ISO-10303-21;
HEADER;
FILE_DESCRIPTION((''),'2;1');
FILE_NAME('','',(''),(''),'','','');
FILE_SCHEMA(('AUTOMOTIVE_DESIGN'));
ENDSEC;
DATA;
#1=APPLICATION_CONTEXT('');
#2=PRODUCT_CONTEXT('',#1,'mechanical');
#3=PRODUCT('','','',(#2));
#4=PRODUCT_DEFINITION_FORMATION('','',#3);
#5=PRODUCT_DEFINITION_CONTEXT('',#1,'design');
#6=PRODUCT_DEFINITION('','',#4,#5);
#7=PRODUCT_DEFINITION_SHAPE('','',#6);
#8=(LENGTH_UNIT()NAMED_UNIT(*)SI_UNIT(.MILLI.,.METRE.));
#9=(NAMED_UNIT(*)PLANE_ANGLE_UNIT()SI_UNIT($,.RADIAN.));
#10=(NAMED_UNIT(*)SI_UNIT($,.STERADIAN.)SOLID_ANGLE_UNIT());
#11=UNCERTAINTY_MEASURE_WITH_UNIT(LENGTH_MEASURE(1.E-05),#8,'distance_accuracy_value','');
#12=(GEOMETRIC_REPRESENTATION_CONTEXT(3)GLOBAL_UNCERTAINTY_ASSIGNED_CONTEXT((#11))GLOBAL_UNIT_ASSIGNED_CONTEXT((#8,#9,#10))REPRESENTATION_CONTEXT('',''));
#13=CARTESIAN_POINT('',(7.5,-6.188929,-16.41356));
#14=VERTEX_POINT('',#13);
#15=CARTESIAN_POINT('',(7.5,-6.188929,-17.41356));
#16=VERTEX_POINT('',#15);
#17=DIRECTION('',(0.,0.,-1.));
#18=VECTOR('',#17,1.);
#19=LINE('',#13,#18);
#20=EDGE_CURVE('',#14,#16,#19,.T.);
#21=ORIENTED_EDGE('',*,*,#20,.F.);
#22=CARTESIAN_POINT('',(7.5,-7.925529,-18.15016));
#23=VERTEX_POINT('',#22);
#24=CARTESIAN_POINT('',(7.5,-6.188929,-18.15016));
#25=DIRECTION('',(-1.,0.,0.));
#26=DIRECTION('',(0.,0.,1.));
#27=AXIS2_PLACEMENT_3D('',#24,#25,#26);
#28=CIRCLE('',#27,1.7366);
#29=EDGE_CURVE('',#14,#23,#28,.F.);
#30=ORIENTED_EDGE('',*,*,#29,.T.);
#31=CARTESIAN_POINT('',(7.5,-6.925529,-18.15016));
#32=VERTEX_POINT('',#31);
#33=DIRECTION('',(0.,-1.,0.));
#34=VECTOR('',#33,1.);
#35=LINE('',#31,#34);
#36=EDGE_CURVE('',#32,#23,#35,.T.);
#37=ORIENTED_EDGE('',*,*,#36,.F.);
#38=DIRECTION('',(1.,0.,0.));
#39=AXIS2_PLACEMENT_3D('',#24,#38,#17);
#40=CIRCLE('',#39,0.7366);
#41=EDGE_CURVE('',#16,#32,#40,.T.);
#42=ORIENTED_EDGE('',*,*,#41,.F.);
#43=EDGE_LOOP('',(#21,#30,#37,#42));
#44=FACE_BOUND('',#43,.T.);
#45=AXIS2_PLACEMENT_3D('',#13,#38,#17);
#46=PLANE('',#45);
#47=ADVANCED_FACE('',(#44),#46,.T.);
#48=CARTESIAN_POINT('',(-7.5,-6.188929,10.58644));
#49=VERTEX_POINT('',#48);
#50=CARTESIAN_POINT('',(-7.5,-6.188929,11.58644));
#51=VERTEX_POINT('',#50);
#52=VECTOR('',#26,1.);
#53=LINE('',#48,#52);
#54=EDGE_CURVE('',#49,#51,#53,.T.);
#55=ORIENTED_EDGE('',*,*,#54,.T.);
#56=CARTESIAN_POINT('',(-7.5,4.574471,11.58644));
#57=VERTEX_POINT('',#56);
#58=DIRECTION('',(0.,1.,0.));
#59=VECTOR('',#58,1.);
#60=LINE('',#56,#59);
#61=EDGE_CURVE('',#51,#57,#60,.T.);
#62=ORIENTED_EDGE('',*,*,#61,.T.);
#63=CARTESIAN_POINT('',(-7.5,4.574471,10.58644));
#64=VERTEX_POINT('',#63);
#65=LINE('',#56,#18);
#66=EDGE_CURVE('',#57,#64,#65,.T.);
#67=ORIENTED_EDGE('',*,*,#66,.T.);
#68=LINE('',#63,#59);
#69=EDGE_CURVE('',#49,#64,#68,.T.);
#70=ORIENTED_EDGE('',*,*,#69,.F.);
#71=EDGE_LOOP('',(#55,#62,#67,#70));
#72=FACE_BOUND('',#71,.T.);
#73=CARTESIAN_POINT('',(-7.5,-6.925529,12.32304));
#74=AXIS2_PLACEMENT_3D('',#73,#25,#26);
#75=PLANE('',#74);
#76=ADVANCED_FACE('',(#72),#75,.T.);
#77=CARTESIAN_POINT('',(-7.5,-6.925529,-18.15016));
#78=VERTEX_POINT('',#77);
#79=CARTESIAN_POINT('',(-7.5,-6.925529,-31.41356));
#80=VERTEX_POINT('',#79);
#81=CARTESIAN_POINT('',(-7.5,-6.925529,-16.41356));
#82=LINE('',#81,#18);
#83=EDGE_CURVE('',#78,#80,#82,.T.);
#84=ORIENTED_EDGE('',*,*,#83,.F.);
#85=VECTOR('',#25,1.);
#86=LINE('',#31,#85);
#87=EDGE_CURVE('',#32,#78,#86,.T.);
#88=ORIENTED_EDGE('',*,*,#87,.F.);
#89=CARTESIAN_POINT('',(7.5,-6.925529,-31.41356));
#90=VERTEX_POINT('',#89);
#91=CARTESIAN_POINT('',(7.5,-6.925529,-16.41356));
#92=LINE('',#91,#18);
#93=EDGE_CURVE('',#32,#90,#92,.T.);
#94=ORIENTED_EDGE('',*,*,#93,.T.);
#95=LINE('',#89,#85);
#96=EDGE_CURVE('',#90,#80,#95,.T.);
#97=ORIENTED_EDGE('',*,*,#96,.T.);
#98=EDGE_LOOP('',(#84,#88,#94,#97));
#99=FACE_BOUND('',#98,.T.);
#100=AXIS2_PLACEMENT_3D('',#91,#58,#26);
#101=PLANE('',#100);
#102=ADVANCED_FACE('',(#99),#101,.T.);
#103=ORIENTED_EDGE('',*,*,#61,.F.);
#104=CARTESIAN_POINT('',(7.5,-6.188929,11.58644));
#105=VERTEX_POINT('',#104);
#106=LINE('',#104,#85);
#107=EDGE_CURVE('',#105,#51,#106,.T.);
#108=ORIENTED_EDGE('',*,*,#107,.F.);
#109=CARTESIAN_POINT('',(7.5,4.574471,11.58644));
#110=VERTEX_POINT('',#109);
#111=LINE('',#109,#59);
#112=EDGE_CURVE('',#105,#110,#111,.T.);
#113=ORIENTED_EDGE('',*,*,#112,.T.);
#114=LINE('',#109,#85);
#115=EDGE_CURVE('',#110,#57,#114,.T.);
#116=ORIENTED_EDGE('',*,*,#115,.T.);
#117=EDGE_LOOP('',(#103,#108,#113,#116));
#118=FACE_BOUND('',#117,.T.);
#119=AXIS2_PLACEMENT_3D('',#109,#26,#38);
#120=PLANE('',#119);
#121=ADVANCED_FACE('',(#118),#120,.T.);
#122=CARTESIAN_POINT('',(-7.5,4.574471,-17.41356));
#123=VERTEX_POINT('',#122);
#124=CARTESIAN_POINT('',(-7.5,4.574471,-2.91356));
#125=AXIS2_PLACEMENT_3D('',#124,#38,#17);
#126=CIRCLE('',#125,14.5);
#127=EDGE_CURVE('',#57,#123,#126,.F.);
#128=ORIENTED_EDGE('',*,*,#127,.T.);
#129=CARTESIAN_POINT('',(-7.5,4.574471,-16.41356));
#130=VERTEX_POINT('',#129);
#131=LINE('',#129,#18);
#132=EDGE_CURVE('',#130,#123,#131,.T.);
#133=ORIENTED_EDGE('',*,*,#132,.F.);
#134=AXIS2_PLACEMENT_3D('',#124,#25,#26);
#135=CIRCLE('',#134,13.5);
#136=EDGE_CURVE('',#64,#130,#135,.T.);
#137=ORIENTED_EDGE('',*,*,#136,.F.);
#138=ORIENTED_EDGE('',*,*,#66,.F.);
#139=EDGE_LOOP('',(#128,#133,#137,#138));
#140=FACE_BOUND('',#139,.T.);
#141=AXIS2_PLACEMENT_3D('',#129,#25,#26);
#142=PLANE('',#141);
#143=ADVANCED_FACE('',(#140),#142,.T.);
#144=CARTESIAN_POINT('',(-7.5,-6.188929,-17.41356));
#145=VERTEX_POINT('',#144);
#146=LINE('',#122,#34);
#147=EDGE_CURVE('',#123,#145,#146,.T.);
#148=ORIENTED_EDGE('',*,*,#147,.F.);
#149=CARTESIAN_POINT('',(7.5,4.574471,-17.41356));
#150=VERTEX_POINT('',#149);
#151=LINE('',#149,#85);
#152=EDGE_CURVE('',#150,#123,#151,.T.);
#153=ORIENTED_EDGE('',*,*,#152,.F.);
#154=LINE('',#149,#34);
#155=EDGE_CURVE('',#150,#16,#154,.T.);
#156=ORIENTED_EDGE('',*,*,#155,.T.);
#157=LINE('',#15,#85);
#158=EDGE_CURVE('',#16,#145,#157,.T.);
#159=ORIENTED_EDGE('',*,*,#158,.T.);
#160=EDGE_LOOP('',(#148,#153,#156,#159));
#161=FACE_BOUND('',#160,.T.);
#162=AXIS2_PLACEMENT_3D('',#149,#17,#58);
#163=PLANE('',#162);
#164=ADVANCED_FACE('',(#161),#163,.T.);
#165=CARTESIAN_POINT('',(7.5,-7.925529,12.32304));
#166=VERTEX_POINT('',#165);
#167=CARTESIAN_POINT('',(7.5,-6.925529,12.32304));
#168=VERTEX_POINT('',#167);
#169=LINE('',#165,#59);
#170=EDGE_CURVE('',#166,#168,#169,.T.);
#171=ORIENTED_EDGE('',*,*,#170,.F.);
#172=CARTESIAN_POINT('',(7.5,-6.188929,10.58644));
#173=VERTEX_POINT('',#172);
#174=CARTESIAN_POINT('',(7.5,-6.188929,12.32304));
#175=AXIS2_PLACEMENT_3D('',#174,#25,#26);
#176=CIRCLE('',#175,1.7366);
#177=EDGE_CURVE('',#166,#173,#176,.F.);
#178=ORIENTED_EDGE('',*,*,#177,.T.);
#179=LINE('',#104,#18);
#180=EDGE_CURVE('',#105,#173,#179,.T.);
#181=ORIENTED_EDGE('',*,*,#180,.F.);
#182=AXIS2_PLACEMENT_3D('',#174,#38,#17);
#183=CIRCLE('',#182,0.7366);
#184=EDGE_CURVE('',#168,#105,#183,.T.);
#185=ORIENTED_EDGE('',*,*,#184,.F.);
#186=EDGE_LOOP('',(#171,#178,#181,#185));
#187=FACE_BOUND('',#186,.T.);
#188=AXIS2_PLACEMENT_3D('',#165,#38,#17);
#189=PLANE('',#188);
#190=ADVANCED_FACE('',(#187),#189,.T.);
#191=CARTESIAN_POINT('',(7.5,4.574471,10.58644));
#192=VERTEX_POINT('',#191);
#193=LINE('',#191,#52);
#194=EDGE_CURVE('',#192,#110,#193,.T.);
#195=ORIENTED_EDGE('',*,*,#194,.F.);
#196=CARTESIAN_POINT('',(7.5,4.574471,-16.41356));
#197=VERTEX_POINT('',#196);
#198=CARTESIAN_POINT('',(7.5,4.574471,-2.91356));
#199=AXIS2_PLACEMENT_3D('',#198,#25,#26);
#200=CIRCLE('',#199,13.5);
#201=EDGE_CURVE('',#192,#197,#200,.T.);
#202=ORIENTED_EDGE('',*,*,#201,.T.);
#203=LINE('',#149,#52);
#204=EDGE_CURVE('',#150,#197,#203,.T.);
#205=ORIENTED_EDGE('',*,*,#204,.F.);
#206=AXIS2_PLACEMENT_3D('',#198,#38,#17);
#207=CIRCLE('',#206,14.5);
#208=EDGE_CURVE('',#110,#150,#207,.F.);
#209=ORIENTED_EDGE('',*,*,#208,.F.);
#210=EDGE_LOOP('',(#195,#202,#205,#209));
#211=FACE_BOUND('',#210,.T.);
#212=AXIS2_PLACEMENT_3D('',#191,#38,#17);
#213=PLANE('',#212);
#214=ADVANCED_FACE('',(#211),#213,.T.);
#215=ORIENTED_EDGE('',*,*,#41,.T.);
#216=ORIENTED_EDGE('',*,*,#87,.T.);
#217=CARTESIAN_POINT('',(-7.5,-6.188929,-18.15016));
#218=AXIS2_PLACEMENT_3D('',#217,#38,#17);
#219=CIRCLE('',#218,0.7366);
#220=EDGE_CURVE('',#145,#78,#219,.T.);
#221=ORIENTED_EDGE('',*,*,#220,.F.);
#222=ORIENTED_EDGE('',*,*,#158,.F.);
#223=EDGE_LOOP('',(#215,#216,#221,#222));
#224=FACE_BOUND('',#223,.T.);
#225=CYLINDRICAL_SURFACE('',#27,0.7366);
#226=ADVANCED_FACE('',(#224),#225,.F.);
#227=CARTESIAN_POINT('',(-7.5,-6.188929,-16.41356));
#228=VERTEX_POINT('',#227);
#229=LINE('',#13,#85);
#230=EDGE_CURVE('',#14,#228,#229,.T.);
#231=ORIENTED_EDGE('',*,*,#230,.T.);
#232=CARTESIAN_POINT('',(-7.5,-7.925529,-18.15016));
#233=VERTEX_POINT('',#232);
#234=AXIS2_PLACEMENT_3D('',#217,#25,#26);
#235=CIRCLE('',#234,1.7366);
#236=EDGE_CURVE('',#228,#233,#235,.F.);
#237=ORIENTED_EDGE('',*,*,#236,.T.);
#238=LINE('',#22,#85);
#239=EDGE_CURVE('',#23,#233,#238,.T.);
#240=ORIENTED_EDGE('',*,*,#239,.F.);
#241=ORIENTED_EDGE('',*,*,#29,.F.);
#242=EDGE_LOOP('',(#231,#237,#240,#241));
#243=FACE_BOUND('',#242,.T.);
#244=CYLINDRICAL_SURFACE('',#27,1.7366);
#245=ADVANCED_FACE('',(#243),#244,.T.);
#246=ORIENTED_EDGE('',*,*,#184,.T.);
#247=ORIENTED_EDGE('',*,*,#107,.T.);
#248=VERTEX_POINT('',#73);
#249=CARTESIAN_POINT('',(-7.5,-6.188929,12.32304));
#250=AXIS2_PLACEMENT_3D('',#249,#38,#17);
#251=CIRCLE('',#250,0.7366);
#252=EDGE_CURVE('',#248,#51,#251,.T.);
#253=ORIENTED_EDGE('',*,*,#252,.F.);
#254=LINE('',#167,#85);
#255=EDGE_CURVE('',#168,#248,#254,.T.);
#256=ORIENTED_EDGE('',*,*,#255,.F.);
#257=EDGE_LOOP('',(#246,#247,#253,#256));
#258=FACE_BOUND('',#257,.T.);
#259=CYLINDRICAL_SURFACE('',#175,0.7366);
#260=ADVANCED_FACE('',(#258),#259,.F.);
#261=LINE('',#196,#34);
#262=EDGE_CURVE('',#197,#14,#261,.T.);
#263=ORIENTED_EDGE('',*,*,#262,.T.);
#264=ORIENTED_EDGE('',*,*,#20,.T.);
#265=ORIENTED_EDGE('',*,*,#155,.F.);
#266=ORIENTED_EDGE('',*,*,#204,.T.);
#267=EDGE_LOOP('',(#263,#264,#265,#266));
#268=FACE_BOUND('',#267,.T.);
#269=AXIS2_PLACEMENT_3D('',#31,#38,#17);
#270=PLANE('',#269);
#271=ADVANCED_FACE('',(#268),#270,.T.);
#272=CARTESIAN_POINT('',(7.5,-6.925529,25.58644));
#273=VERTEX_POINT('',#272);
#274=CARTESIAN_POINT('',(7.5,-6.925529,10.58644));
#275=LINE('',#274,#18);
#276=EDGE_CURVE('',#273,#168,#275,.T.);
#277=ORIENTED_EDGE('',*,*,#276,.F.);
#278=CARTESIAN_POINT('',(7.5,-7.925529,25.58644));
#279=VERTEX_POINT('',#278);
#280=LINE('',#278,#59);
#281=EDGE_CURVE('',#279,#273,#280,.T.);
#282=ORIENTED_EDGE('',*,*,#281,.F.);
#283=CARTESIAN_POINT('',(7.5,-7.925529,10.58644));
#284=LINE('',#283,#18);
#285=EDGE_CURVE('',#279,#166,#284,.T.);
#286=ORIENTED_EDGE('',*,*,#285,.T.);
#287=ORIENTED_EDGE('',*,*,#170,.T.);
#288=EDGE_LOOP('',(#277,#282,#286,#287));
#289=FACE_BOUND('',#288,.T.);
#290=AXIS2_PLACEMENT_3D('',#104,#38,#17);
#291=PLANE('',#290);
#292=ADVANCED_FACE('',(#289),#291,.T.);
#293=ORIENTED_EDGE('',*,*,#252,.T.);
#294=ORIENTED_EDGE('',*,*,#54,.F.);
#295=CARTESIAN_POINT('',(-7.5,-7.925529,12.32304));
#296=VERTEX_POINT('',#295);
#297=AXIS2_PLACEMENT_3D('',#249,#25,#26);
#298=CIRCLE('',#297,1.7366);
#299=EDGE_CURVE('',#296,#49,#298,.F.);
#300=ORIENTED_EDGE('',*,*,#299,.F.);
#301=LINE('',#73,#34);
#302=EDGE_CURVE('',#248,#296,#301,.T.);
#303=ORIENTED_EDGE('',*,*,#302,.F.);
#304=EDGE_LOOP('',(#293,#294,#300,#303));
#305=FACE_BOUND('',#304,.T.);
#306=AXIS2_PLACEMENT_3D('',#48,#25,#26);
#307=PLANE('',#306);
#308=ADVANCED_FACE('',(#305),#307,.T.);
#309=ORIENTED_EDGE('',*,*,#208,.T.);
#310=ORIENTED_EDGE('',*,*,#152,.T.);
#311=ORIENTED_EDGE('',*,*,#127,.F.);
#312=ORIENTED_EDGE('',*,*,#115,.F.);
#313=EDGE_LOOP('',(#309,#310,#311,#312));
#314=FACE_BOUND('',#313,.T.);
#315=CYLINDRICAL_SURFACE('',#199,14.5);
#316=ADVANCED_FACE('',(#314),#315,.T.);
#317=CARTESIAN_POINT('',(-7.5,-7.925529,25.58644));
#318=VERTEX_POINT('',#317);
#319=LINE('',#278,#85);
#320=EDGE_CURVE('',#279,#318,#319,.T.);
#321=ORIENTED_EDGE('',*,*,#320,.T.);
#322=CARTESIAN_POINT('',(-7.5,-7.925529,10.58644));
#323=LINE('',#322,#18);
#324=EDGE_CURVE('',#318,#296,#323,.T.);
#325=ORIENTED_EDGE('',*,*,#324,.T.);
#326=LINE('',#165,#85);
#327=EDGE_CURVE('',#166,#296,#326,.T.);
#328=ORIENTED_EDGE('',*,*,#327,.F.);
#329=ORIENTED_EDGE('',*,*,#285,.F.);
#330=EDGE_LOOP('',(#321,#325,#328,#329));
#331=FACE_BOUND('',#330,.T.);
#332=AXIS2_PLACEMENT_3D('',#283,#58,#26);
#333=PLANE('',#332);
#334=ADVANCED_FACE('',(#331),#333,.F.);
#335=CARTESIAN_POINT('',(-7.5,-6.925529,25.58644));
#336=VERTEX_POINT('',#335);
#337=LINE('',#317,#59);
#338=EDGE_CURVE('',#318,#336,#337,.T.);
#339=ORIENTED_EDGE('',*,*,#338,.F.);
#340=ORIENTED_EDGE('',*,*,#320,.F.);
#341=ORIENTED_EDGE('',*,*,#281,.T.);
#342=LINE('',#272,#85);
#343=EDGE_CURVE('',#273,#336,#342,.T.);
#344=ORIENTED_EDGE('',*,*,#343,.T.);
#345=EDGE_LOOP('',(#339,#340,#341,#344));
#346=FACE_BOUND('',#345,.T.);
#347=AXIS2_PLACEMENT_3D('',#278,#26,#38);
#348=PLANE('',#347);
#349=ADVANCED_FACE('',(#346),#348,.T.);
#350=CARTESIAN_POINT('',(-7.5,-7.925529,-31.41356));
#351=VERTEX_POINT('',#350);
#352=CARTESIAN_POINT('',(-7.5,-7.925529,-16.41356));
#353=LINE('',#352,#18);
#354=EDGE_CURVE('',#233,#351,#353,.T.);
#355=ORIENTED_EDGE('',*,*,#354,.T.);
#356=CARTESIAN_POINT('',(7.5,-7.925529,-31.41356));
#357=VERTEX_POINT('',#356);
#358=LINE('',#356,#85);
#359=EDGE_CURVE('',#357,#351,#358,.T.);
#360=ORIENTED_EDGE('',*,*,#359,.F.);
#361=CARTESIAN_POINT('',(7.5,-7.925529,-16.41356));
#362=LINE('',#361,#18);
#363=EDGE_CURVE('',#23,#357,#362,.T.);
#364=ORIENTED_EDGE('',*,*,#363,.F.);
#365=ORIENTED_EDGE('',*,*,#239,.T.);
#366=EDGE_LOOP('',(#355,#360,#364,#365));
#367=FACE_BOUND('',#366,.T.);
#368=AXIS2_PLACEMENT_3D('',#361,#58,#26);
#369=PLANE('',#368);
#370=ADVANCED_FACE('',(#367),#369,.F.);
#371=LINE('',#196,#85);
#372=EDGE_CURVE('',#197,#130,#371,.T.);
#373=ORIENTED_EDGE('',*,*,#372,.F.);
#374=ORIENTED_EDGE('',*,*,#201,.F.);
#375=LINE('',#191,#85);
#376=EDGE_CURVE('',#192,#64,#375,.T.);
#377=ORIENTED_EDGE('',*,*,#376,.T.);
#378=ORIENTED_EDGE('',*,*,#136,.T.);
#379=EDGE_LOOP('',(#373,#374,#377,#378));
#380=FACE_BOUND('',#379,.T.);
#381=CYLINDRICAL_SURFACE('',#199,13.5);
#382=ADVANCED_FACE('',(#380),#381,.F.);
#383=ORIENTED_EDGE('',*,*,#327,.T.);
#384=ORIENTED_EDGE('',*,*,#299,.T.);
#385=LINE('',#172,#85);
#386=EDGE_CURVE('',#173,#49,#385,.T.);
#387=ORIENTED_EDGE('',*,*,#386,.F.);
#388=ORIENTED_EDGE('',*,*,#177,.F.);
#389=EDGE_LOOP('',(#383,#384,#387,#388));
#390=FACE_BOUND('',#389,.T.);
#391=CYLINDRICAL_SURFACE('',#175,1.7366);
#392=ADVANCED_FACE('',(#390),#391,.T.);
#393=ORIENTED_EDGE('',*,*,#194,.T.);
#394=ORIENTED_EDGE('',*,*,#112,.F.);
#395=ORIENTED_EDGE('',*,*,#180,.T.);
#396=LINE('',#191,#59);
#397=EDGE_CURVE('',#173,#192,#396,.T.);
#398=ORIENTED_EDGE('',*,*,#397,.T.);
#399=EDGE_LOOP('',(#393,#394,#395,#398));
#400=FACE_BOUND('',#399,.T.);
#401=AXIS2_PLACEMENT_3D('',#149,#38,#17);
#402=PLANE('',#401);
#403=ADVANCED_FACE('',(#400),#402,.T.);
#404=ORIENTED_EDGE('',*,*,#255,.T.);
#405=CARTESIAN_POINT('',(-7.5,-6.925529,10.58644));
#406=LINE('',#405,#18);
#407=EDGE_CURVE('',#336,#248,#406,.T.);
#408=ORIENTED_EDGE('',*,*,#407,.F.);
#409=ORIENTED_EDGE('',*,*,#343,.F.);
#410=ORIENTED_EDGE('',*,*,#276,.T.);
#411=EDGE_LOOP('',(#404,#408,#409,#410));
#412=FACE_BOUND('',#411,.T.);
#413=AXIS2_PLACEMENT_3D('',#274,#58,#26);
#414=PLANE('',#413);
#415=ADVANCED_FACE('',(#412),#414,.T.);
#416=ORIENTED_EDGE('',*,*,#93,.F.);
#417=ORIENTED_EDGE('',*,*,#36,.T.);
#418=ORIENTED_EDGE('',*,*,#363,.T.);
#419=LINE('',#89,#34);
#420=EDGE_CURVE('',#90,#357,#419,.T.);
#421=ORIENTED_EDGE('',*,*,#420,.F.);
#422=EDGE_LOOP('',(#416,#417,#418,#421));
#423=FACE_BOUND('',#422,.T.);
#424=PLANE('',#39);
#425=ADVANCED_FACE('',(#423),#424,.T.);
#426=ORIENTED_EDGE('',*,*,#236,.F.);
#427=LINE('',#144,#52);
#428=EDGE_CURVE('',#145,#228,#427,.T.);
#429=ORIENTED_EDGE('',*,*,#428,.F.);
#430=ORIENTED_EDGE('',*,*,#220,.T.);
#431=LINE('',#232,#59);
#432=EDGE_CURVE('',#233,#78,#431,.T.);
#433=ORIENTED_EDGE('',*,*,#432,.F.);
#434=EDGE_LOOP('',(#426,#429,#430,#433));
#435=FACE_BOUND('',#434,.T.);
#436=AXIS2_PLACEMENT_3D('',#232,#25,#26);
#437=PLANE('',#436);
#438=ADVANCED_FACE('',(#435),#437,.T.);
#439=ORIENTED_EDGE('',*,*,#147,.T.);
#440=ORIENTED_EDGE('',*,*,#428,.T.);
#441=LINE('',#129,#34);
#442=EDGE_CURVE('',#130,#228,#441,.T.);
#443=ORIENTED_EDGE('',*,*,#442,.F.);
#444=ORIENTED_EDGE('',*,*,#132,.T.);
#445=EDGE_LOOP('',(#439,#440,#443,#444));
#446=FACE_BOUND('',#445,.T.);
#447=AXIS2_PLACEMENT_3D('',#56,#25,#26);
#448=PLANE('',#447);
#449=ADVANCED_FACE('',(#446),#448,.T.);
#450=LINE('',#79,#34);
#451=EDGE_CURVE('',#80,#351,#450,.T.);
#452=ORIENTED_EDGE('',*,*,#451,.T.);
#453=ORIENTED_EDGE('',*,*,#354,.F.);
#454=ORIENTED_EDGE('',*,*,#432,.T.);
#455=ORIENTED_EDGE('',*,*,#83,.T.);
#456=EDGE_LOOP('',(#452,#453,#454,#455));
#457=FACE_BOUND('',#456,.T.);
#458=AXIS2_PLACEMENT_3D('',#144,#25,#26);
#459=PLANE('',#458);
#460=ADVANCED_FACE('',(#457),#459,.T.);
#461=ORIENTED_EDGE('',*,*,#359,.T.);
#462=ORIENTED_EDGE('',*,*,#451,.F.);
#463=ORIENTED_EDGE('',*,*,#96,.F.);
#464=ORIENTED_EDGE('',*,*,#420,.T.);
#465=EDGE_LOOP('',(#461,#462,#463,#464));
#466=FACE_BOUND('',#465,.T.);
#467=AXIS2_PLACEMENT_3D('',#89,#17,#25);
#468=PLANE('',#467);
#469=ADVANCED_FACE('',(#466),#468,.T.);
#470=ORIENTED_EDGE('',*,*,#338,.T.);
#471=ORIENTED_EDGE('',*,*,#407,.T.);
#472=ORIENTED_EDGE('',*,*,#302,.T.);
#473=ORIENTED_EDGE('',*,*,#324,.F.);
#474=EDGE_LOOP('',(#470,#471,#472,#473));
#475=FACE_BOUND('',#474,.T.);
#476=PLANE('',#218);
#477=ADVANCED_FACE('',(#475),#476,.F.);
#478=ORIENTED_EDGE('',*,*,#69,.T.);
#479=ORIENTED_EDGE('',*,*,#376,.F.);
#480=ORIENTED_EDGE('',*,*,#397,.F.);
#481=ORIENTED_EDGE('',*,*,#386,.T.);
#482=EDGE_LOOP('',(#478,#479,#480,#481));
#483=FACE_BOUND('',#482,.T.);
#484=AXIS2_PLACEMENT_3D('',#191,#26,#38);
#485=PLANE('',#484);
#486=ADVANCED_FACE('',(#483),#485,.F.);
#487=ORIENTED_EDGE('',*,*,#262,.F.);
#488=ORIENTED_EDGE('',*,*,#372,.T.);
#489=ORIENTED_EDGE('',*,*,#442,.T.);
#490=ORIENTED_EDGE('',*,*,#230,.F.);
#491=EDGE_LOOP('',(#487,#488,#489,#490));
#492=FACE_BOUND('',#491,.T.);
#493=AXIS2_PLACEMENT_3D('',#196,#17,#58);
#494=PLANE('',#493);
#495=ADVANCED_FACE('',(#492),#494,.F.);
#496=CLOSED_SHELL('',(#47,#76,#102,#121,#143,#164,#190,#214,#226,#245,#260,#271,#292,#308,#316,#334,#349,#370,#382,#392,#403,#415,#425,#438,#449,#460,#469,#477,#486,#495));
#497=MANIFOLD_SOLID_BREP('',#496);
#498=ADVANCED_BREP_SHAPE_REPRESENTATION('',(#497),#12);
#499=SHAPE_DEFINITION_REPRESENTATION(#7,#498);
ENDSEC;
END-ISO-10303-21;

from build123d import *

# Parameters (mm, degrees)
BASE_FLANGE1_DEPTH = 7.5


# Sheet-metal steps are written as plain solids
with BuildPart() as part:
    # Sketch1 → Base-Flange1 (new, symmetric)
    with BuildSketch(Plane(origin=(0, 0, 0), x_dir=(0, 0, -1), z_dir=(1, 0, 0))):
        with BuildLine():
            Line((31.413560175, -7.925529264), (18.150160175, -7.925529264))
            ThreePointArc((18.150160175, -7.925529264), (16.922198539, -7.416890901), (16.413560175, -6.188929264))
            Line((16.413560175, -6.188929264), (16.413560175, 4.574470736))
            ThreePointArc((16.413560175, 4.574470736), (2.913560175, 18.074470736), (-10.586439825, 4.574470736))
            Line((-10.586439825, 4.574470736), (-10.586439825, -6.188929264))
            ThreePointArc((-10.586439825, -6.188929264), (-11.095078189, -7.416890901), (-12.323039825, -7.925529264))
            Line((-12.323039825, -7.925529264), (-25.586439825, -7.925529264))
            Line((-25.586439825, -7.925529264), (-25.586439825, -6.925529264))
            Line((-25.586439825, -6.925529264), (-12.323039825, -6.925529264))
            ThreePointArc((-12.323039825, -6.925529264), (-11.80218497, -6.709784119), (-11.586439825, -6.188929264))
            Line((-11.586439825, -6.188929264), (-11.586439825, 4.574470736))
            ThreePointArc((-11.586439825, 4.574470736), (2.913560175, 19.074470736), (17.413560175, 4.574470736))
            Line((17.413560175, 4.574470736), (17.413560175, -6.188929264))
            ThreePointArc((17.413560175, -6.188929264), (17.62930532, -6.709784119), (18.150160175, -6.925529264))
            Line((18.150160175, -6.925529264), (31.413560175, -6.925529264))
            Line((31.413560175, -6.925529264), (31.413560175, -7.925529264))
        make_face()
    extrude(amount=BASE_FLANGE1_DEPTH, both=True)


solid = part.part
